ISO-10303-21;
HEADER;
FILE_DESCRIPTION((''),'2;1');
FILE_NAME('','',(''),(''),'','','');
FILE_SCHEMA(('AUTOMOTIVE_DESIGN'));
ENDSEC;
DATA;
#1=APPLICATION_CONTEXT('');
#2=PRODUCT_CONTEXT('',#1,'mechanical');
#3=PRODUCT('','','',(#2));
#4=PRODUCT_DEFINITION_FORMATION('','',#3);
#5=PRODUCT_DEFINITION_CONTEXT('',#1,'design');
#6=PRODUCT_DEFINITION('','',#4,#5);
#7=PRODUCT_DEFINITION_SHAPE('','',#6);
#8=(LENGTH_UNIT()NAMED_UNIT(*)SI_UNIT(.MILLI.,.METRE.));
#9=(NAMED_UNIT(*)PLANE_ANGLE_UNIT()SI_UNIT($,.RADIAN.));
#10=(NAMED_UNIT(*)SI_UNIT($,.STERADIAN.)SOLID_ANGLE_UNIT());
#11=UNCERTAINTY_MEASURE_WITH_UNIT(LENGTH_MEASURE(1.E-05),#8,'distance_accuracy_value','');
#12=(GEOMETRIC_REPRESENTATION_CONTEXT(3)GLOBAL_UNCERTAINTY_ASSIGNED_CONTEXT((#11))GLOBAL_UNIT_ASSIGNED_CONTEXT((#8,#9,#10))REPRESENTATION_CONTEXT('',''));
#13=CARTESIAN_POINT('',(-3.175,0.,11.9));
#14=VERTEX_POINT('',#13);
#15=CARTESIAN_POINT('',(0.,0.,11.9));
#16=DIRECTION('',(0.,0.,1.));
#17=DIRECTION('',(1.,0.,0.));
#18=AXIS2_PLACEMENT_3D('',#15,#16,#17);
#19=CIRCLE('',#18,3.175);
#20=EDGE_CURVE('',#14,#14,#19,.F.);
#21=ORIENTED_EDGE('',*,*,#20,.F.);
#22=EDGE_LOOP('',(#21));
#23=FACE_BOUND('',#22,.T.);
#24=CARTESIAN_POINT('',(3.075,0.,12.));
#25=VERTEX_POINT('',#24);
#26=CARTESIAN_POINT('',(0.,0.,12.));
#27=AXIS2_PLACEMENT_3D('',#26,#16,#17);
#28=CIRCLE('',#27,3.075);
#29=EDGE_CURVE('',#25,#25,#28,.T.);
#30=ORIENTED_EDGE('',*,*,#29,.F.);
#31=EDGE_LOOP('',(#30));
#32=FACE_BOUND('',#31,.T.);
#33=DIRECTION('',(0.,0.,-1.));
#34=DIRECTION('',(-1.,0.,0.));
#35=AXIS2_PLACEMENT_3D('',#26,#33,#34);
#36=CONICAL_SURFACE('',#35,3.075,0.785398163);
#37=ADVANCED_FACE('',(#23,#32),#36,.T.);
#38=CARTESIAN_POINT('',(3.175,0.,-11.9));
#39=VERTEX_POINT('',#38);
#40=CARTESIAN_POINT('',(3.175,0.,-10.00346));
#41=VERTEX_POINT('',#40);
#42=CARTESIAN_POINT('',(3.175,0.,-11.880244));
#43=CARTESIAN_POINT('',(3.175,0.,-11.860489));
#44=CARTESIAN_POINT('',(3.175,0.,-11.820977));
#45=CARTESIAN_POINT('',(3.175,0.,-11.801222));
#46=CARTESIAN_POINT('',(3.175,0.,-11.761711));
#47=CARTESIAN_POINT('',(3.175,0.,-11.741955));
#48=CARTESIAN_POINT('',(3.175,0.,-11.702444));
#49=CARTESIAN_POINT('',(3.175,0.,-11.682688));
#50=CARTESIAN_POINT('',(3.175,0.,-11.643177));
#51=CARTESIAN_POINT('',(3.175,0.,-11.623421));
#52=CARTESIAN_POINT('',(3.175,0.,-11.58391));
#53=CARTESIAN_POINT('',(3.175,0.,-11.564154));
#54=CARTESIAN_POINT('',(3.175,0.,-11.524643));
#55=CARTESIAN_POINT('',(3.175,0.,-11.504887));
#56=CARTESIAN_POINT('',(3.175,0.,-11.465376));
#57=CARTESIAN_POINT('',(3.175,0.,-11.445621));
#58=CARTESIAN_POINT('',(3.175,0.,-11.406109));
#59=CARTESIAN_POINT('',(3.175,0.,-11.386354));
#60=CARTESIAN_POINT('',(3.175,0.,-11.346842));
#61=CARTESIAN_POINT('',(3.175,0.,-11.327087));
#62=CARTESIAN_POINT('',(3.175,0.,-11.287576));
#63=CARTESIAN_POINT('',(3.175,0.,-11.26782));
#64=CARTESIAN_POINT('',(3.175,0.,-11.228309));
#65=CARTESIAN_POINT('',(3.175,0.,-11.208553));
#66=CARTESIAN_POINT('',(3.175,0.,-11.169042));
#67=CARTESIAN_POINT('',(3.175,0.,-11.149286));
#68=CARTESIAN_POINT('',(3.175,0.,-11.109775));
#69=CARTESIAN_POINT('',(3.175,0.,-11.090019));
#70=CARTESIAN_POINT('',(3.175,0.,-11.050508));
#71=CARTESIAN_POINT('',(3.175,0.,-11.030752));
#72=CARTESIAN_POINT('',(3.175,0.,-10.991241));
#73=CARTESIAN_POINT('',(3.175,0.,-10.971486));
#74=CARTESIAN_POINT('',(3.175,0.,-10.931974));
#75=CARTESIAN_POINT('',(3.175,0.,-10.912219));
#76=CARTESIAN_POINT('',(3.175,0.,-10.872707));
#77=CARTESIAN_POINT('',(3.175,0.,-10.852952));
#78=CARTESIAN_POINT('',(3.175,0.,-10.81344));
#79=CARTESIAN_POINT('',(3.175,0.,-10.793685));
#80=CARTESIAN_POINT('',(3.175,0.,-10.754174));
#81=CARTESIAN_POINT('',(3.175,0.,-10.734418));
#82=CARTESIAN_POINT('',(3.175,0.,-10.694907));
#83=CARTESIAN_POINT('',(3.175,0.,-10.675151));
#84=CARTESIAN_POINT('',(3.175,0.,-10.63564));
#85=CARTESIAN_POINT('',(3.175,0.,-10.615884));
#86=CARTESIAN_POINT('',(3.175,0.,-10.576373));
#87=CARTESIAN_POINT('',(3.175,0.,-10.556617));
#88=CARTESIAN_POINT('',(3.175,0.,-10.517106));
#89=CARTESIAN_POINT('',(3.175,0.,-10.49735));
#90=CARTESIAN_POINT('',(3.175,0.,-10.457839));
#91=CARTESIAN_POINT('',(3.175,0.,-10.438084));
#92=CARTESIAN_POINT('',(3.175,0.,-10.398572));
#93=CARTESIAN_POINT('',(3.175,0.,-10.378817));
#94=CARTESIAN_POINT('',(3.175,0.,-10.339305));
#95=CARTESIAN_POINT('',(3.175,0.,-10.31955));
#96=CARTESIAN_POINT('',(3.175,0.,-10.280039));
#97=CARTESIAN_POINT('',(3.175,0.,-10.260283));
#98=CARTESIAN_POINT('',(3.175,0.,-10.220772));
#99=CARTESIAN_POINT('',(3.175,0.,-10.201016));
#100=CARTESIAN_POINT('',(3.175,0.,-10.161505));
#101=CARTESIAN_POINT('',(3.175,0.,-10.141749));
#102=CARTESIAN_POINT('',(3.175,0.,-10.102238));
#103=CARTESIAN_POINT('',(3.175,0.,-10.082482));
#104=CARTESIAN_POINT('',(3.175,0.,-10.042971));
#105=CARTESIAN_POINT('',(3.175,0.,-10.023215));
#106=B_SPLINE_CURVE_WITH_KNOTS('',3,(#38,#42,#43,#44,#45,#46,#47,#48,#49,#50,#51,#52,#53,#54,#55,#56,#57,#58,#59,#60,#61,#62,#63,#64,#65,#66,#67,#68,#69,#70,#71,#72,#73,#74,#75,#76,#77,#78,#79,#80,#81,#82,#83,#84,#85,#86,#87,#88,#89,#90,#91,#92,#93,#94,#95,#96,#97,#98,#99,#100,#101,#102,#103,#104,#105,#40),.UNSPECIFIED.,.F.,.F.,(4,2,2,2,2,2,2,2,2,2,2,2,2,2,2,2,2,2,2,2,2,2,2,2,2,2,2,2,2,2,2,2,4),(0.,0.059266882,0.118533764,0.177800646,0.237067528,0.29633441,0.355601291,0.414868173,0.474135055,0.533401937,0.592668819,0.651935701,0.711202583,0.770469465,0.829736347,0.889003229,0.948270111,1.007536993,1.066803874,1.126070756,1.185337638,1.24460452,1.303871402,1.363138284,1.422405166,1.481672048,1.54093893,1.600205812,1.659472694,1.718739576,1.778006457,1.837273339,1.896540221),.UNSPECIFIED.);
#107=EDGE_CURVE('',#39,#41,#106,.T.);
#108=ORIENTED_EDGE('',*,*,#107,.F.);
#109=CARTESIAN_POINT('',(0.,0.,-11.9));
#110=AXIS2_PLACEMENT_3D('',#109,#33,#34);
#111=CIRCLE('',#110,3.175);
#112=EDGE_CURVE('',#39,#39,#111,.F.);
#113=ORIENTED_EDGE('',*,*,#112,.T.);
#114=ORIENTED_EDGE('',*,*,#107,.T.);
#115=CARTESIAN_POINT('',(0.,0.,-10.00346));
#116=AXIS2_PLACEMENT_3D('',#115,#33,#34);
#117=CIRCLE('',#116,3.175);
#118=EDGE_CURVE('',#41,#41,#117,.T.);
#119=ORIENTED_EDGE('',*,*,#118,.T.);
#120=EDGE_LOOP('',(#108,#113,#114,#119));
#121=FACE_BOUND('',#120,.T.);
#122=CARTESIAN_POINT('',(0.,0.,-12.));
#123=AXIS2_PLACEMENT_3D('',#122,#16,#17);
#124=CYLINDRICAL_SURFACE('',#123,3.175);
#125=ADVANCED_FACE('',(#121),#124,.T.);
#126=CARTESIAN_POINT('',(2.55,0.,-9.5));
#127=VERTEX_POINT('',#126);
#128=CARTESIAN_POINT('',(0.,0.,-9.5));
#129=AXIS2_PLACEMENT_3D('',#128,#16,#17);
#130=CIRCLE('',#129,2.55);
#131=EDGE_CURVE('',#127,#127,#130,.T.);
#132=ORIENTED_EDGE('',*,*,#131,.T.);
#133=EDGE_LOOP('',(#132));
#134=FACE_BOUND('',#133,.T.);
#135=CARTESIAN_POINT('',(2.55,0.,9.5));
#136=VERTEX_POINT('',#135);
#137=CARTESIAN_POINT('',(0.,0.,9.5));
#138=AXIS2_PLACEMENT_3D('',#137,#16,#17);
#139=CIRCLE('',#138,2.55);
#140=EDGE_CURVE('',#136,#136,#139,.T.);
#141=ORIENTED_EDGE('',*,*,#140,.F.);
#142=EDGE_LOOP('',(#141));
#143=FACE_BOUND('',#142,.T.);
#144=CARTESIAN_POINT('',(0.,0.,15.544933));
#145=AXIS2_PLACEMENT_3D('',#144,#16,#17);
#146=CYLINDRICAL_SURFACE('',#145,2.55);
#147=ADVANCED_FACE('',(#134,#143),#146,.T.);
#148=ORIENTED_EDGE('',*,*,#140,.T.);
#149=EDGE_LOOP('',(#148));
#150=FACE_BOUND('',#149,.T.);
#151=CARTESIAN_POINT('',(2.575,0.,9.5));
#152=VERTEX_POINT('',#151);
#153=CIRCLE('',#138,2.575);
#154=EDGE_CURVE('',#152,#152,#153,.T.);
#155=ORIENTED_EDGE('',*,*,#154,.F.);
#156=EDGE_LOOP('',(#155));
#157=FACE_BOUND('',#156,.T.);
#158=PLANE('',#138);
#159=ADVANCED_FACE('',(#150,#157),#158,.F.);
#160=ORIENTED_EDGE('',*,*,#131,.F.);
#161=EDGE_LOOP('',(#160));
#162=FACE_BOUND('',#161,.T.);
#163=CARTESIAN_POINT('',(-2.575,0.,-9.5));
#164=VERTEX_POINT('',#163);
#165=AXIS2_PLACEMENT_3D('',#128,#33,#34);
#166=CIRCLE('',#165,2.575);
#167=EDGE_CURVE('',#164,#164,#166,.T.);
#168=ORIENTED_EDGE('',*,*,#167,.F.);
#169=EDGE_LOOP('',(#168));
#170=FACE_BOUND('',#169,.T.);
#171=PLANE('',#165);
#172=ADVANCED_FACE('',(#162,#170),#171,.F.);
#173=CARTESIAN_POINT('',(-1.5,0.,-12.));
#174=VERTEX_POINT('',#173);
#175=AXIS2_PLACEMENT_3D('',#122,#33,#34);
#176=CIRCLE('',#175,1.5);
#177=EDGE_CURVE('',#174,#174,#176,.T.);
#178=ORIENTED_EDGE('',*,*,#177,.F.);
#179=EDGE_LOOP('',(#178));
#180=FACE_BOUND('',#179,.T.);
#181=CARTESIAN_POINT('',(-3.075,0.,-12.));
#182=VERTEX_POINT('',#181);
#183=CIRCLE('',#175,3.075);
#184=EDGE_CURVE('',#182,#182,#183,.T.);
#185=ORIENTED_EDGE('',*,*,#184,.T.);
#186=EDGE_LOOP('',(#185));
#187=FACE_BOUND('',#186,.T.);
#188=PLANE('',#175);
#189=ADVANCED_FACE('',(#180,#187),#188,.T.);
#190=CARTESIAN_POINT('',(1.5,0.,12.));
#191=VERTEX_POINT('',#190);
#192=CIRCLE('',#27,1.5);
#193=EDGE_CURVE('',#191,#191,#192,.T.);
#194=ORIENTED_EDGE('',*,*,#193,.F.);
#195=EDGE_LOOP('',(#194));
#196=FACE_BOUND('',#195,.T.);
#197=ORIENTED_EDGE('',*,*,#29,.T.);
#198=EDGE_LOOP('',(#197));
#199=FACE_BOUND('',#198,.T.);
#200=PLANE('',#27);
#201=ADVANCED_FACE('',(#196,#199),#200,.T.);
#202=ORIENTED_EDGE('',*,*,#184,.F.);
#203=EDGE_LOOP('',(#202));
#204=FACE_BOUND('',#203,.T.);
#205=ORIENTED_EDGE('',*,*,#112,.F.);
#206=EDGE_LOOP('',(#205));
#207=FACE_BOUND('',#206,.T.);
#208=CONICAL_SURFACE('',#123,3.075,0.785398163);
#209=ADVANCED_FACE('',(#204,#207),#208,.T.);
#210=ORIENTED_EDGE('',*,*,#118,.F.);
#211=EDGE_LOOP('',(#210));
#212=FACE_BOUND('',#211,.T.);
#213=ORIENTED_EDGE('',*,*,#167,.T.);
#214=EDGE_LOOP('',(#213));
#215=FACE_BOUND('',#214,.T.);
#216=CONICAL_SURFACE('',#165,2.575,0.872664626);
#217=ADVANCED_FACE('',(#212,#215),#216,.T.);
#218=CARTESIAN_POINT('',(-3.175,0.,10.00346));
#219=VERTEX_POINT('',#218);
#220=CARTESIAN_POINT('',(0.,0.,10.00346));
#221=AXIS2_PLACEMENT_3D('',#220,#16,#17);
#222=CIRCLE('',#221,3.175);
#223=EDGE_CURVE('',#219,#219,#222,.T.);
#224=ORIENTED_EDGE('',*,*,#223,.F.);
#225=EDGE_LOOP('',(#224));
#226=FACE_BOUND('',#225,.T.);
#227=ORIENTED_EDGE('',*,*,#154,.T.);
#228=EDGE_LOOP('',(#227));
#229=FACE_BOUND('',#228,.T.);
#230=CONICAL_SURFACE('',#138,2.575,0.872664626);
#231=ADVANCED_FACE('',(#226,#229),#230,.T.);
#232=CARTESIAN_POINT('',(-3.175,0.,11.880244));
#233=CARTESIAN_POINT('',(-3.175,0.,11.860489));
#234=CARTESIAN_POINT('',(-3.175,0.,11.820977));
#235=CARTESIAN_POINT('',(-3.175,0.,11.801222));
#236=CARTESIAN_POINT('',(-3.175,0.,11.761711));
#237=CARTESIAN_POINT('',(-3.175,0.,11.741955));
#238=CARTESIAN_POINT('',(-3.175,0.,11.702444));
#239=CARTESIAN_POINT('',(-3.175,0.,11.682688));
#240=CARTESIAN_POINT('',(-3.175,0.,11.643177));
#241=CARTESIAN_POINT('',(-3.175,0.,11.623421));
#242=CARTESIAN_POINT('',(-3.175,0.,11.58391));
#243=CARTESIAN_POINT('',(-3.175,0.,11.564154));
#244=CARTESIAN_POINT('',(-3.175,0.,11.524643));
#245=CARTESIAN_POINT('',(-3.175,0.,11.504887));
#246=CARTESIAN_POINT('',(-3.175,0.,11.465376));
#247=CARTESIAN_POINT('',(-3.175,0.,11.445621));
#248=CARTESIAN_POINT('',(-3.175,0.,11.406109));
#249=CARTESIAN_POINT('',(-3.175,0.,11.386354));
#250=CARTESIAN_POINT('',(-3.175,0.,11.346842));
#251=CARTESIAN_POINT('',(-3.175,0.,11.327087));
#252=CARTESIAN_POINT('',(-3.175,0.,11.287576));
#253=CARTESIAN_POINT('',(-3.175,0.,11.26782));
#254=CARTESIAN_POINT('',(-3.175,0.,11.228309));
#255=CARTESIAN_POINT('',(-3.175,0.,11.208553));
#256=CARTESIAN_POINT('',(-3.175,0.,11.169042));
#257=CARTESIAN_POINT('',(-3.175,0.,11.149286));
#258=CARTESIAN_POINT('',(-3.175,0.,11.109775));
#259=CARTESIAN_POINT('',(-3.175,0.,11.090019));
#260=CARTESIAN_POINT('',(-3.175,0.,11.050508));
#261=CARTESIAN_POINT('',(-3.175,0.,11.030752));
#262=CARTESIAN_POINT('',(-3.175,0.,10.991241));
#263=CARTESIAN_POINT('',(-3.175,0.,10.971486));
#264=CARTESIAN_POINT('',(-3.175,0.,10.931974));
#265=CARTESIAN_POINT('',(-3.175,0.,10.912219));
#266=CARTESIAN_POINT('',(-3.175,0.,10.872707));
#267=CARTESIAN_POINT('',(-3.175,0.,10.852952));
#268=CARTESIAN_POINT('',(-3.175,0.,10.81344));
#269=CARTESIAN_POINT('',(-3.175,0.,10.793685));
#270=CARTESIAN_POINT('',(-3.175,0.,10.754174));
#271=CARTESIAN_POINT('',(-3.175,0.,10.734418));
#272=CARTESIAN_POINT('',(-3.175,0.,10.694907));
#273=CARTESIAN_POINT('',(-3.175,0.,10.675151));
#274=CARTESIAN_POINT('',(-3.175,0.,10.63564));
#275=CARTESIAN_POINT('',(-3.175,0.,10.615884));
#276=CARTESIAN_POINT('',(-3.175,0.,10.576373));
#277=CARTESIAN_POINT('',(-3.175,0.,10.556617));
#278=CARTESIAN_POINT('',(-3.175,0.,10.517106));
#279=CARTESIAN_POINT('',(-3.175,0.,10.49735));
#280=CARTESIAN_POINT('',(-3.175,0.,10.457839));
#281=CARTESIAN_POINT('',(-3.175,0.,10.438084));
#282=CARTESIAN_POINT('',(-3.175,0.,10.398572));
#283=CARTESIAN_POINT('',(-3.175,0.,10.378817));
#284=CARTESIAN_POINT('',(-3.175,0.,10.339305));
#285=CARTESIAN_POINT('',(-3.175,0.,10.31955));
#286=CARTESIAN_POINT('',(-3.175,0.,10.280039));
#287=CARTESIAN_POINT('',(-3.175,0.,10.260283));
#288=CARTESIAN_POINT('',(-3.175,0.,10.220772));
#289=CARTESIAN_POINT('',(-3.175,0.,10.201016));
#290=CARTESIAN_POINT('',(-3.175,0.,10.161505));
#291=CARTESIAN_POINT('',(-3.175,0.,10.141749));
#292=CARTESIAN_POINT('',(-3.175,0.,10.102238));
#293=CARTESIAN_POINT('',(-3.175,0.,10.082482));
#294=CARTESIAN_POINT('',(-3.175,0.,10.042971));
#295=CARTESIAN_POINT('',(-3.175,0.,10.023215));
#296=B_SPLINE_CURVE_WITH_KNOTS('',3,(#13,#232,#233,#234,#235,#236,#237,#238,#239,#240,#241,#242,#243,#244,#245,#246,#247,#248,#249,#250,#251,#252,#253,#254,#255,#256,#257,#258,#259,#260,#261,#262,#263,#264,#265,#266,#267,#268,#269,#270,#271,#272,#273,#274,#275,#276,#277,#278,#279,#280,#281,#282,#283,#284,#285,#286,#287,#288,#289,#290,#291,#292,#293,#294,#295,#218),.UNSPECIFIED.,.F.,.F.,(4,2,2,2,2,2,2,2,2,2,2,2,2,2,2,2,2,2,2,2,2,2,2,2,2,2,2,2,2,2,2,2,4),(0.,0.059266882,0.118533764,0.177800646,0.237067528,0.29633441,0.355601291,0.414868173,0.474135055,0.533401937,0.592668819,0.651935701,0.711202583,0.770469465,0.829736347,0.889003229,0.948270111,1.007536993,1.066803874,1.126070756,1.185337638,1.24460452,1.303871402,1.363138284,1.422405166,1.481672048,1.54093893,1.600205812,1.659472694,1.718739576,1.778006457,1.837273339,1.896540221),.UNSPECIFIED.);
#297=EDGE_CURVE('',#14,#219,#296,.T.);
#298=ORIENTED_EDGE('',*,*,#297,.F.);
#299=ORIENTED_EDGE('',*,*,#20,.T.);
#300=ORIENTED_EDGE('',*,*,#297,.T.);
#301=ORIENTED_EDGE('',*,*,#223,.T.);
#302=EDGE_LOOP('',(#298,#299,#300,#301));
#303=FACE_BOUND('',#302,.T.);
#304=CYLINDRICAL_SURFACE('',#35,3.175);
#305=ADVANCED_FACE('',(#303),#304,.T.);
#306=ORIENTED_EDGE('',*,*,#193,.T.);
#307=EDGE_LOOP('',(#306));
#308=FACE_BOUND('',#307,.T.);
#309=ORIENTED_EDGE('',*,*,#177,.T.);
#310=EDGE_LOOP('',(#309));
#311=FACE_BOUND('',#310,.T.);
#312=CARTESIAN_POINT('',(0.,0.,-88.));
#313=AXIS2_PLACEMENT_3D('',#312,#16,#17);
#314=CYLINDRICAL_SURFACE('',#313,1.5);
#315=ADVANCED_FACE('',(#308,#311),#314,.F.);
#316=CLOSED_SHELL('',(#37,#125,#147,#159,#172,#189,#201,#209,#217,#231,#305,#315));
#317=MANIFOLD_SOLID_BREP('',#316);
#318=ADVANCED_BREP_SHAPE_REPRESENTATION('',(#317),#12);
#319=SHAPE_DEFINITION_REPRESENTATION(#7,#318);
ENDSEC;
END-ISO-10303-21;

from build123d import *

# Parameters (mm, degrees)
IZIM1_W                     = 19
IZIM1_H                     = 2.55
IZIM4_R                     = 2.575
Y_KSEKLIK_EKSTR_ZYON1_DEPTH = 0.6
IZIM5_R                     = 3.175
Y_KSEKLIK_EKSTR_ZYON2_DEPTH = 1.9
IZIM7_R                     = 2.575
Y_KSEKLIK_EKSTR_ZYON4_DEPTH = 0.6
Y_KSEKLIK_EKSTR_ZYON5_START = 1.9
IZIM8_R                     = 3.175
Y_KSEKLIK_EKSTR_ZYON5_DEPTH = 1.9
IZIM9_R                     = 1.5
KES_EKSTR_ZYON1_DEPTH       = 100
PAH1_SIZE                   = 0.1


# Read off the part's stored shape, not the designer's step: Draft2, Draft3
with BuildPart() as part:
    # Çizim1 → Döndür3 (revolve)
    with BuildSketch(Plane(origin=(0, 0, 0), x_dir=(0, 0, -1), z_dir=(1, 0, 0)), mode=Mode.PRIVATE) as d_nd_r3_sk:
        with Locations((0, -1.275)):
            Rectangle(IZIM1_W, IZIM1_H)
    revolve(d_nd_r3_sk.sketch.rotate(Axis((0, 0, 15.544933078), (0, 0, -1)), 270), axis=Axis((0, 0, 15.544933078), (0, 0, -1)))

    # Çizim4 → Yükseklik-Ekstrüzyon1 (add)
    with BuildSketch(Plane(origin=(0, 0, -9.5), x_dir=(-1, 0, 0), z_dir=(0, 0, -1))):
        Circle(IZIM4_R)
    extrude(amount=Y_KSEKLIK_EKSTR_ZYON1_DEPTH)

    # Çizim5 → Yükseklik-Ekstrüzyon2 (add)
    with BuildSketch(Plane(origin=(0, 0, -10.1), x_dir=(-1, 0, 0), z_dir=(0, 0, -1))):
        with Locations(Location((0, 0, 0), (0, 0, 180))):
            Circle(IZIM5_R)
    extrude(amount=Y_KSEKLIK_EKSTR_ZYON2_DEPTH)

    # Draft2 outline → Draft2 (revolve)
    with BuildSketch(Plane.XZ):
        Polygon((3.175, -10.003459779), (2.575, -9.5), (2.575, -10.1), (3.175, -10.1), align=None)
    revolve(axis=Axis((0, 0, 0), (0, 0, 1)))

    # Çizim7 → Yükseklik-Ekstrüzyon4 (add)
    with BuildSketch(Plane.XY.offset(9.5)):
        Circle(IZIM7_R)
    extrude(amount=Y_KSEKLIK_EKSTR_ZYON4_DEPTH)

    # Çizim8 → Yükseklik-Ekstrüzyon5 (add)
    with BuildSketch(Plane.XY.offset(10.1).offset(Y_KSEKLIK_EKSTR_ZYON5_START)):
        Circle(IZIM8_R)
    extrude(amount=-Y_KSEKLIK_EKSTR_ZYON5_DEPTH)

    # Draft3 outline → Draft3 (revolve)
    with BuildSketch(Plane.XZ):
        Polygon((2.575, 9.5), (3.175, 10.003459779), (3.175, 10.1), (2.575, 10.1), align=None)
    revolve(axis=Axis((0, 0, 0), (0, 0, 1)))

    # Çizim9 → Kes-Ekstrüzyon1 (cut)
    with BuildSketch(Plane.XY.offset(12)):
        Circle(IZIM9_R)
    extrude(amount=-KES_EKSTR_ZYON1_DEPTH, mode=Mode.SUBTRACT)

    # Pah1
    pah1_edges = [part.edges().sort_by_distance(p)[0] for p in [
        (-3.175, 0, -12),
        (-3.175, 0, 12),
    ]]
    chamfer(pah1_edges, length=PAH1_SIZE)


solid = part.part
